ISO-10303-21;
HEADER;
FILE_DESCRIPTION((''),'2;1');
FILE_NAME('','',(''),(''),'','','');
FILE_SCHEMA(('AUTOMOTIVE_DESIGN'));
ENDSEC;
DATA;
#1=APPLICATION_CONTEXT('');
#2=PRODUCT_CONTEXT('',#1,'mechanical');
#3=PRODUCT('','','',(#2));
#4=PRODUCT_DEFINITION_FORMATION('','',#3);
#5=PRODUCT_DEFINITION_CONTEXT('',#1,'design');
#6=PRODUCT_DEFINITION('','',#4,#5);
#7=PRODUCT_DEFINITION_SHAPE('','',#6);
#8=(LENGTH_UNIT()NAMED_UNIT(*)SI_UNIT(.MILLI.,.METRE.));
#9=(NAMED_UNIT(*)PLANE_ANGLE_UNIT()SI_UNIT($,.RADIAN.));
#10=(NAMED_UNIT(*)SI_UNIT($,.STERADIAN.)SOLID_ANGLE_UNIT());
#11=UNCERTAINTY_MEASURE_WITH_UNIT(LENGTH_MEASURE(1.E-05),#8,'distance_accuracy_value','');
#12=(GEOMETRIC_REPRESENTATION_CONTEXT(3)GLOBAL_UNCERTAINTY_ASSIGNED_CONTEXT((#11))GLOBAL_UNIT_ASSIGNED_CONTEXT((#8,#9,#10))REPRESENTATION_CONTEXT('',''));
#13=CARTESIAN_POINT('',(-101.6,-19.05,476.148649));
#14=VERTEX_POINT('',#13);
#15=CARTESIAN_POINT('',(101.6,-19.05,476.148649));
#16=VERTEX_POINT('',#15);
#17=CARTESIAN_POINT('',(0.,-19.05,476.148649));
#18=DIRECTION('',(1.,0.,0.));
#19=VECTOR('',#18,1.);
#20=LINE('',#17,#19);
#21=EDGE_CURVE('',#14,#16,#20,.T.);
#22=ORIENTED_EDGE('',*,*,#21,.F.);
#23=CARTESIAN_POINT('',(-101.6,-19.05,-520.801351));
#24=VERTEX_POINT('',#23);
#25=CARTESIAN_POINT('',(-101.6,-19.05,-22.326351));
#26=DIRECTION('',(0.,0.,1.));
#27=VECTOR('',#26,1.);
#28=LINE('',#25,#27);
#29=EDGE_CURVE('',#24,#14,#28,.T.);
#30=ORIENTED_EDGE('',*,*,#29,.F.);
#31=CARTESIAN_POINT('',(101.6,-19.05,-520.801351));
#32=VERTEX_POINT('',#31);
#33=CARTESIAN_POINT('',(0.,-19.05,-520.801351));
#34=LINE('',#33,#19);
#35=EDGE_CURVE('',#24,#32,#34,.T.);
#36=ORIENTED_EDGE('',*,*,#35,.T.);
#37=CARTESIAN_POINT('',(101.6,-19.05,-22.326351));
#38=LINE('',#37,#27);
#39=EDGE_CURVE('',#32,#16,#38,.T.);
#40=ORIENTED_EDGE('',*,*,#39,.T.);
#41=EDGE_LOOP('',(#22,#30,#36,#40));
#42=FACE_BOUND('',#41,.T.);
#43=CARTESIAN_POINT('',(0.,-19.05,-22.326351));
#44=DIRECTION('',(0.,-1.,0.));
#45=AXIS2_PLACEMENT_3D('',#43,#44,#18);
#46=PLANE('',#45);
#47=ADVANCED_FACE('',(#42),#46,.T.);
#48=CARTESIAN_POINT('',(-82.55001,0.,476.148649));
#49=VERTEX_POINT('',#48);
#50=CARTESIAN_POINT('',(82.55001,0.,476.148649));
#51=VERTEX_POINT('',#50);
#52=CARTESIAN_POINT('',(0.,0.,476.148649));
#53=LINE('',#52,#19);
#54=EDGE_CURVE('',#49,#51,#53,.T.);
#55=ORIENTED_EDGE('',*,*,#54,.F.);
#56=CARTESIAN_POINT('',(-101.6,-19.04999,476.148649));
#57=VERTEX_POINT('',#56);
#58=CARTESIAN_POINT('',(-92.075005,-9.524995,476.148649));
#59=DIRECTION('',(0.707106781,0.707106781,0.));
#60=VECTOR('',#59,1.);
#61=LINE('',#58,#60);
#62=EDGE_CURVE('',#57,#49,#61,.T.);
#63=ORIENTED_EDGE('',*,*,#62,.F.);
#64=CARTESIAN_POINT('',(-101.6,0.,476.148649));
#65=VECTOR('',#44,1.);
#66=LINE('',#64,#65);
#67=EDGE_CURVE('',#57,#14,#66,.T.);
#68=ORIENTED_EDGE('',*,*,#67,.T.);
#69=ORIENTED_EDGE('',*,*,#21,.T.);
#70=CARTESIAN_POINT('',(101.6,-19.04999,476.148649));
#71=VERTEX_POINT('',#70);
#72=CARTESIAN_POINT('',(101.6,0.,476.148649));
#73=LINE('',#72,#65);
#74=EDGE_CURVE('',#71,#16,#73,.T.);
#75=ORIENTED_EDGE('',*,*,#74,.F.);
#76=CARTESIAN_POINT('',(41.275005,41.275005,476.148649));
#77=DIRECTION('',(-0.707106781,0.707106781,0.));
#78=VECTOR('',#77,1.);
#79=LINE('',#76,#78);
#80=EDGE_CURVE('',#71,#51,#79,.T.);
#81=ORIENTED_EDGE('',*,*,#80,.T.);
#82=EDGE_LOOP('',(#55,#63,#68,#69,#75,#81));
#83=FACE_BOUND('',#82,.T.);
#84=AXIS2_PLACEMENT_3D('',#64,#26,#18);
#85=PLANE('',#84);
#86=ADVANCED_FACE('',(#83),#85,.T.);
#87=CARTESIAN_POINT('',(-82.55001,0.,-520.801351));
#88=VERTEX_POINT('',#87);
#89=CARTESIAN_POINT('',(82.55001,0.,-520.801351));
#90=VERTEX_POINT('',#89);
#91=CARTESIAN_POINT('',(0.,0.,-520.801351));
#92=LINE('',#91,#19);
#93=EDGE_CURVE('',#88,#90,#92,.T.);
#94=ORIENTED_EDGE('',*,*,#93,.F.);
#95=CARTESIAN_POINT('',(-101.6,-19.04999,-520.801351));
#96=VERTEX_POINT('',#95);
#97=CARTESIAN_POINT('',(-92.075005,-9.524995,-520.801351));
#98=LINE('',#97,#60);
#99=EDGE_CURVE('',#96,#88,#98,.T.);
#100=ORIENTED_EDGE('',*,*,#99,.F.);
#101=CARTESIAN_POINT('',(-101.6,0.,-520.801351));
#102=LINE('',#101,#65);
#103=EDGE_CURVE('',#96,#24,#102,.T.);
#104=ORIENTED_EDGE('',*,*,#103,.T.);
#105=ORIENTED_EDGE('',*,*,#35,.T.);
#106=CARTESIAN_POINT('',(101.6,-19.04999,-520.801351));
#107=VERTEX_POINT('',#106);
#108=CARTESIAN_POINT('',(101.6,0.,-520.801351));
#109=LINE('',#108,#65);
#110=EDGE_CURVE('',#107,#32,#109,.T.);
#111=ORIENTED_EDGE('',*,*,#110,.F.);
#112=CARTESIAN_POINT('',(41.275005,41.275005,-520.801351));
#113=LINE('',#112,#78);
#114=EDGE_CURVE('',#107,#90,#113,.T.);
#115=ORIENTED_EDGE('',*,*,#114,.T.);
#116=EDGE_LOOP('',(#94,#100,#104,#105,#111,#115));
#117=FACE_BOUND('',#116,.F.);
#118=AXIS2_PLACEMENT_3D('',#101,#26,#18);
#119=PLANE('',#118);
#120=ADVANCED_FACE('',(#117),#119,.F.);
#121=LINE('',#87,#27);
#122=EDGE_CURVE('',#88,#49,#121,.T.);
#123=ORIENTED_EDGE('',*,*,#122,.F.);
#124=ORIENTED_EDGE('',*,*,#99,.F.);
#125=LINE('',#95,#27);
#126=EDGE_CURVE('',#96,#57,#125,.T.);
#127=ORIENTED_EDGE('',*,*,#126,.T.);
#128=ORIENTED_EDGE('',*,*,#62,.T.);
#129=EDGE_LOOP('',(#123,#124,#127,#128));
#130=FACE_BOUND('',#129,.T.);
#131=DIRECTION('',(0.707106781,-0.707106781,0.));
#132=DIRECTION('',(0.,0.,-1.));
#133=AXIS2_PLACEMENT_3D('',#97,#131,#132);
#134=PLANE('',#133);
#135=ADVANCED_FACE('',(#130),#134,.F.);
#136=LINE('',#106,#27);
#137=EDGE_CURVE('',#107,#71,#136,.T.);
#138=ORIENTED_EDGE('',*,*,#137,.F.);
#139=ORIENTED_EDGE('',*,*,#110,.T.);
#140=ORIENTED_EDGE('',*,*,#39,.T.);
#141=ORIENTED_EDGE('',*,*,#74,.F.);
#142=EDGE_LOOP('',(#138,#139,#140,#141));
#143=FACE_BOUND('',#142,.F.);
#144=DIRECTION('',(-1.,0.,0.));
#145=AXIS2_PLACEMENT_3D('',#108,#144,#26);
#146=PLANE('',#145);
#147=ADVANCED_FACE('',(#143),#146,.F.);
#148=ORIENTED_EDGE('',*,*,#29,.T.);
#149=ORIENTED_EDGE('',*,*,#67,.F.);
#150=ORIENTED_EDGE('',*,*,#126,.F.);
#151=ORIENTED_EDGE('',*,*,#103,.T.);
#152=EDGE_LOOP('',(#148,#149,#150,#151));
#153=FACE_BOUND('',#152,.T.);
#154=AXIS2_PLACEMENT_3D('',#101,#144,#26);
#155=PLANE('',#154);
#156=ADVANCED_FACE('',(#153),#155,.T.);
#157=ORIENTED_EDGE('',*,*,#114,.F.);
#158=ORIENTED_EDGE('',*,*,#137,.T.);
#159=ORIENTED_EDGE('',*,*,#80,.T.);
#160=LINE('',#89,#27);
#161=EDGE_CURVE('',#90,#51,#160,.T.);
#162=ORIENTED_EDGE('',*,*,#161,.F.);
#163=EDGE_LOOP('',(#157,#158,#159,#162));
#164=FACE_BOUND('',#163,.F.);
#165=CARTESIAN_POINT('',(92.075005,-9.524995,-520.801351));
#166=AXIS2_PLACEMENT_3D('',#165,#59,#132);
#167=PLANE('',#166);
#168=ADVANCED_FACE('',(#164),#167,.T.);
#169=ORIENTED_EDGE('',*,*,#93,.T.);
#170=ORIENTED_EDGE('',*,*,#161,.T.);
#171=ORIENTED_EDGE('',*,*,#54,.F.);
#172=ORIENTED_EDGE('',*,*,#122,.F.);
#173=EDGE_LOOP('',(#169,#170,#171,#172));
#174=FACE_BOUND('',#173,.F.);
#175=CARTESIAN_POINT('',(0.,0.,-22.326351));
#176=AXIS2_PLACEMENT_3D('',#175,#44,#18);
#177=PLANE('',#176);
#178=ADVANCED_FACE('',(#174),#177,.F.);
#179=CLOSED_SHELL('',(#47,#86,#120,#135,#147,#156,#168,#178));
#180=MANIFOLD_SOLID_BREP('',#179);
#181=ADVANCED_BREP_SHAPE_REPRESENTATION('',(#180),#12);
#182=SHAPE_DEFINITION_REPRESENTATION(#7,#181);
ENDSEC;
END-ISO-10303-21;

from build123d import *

# Parameters (mm, degrees)
F0_W     = 203.2
F0_H     = 996.95
F1_DEPTH = 19.05
F2_SIZE2 = 19.04999
F2_SIZE  = 19.04999


# Not quite as in the source:
# - a fillet or chamfer is up to 0.001 mm smaller than in the source, because OpenCascade refuses the exact size


with BuildPart() as f1:
    # F0 (on Front) → F1 (new body)
    with BuildSketch(Plane.XZ):
        with Locations((0, -22.3263513706)):
            Rectangle(F0_W, F0_H)
    extrude(amount=F1_DEPTH)

    # F2 (size 19.05 and 19.05 in the source; OpenCascade refuses exactly that, so slightly less here)
    f2_edges = [f1.edges().sort_by_distance(p)[0] for p in [
        (-101.6, 0, -22.326351),
        (101.6, 0, -22.326351),
    ]]
    chamfer(f2_edges, length=F2_SIZE, length2=F2_SIZE2)


solid = f1.part
